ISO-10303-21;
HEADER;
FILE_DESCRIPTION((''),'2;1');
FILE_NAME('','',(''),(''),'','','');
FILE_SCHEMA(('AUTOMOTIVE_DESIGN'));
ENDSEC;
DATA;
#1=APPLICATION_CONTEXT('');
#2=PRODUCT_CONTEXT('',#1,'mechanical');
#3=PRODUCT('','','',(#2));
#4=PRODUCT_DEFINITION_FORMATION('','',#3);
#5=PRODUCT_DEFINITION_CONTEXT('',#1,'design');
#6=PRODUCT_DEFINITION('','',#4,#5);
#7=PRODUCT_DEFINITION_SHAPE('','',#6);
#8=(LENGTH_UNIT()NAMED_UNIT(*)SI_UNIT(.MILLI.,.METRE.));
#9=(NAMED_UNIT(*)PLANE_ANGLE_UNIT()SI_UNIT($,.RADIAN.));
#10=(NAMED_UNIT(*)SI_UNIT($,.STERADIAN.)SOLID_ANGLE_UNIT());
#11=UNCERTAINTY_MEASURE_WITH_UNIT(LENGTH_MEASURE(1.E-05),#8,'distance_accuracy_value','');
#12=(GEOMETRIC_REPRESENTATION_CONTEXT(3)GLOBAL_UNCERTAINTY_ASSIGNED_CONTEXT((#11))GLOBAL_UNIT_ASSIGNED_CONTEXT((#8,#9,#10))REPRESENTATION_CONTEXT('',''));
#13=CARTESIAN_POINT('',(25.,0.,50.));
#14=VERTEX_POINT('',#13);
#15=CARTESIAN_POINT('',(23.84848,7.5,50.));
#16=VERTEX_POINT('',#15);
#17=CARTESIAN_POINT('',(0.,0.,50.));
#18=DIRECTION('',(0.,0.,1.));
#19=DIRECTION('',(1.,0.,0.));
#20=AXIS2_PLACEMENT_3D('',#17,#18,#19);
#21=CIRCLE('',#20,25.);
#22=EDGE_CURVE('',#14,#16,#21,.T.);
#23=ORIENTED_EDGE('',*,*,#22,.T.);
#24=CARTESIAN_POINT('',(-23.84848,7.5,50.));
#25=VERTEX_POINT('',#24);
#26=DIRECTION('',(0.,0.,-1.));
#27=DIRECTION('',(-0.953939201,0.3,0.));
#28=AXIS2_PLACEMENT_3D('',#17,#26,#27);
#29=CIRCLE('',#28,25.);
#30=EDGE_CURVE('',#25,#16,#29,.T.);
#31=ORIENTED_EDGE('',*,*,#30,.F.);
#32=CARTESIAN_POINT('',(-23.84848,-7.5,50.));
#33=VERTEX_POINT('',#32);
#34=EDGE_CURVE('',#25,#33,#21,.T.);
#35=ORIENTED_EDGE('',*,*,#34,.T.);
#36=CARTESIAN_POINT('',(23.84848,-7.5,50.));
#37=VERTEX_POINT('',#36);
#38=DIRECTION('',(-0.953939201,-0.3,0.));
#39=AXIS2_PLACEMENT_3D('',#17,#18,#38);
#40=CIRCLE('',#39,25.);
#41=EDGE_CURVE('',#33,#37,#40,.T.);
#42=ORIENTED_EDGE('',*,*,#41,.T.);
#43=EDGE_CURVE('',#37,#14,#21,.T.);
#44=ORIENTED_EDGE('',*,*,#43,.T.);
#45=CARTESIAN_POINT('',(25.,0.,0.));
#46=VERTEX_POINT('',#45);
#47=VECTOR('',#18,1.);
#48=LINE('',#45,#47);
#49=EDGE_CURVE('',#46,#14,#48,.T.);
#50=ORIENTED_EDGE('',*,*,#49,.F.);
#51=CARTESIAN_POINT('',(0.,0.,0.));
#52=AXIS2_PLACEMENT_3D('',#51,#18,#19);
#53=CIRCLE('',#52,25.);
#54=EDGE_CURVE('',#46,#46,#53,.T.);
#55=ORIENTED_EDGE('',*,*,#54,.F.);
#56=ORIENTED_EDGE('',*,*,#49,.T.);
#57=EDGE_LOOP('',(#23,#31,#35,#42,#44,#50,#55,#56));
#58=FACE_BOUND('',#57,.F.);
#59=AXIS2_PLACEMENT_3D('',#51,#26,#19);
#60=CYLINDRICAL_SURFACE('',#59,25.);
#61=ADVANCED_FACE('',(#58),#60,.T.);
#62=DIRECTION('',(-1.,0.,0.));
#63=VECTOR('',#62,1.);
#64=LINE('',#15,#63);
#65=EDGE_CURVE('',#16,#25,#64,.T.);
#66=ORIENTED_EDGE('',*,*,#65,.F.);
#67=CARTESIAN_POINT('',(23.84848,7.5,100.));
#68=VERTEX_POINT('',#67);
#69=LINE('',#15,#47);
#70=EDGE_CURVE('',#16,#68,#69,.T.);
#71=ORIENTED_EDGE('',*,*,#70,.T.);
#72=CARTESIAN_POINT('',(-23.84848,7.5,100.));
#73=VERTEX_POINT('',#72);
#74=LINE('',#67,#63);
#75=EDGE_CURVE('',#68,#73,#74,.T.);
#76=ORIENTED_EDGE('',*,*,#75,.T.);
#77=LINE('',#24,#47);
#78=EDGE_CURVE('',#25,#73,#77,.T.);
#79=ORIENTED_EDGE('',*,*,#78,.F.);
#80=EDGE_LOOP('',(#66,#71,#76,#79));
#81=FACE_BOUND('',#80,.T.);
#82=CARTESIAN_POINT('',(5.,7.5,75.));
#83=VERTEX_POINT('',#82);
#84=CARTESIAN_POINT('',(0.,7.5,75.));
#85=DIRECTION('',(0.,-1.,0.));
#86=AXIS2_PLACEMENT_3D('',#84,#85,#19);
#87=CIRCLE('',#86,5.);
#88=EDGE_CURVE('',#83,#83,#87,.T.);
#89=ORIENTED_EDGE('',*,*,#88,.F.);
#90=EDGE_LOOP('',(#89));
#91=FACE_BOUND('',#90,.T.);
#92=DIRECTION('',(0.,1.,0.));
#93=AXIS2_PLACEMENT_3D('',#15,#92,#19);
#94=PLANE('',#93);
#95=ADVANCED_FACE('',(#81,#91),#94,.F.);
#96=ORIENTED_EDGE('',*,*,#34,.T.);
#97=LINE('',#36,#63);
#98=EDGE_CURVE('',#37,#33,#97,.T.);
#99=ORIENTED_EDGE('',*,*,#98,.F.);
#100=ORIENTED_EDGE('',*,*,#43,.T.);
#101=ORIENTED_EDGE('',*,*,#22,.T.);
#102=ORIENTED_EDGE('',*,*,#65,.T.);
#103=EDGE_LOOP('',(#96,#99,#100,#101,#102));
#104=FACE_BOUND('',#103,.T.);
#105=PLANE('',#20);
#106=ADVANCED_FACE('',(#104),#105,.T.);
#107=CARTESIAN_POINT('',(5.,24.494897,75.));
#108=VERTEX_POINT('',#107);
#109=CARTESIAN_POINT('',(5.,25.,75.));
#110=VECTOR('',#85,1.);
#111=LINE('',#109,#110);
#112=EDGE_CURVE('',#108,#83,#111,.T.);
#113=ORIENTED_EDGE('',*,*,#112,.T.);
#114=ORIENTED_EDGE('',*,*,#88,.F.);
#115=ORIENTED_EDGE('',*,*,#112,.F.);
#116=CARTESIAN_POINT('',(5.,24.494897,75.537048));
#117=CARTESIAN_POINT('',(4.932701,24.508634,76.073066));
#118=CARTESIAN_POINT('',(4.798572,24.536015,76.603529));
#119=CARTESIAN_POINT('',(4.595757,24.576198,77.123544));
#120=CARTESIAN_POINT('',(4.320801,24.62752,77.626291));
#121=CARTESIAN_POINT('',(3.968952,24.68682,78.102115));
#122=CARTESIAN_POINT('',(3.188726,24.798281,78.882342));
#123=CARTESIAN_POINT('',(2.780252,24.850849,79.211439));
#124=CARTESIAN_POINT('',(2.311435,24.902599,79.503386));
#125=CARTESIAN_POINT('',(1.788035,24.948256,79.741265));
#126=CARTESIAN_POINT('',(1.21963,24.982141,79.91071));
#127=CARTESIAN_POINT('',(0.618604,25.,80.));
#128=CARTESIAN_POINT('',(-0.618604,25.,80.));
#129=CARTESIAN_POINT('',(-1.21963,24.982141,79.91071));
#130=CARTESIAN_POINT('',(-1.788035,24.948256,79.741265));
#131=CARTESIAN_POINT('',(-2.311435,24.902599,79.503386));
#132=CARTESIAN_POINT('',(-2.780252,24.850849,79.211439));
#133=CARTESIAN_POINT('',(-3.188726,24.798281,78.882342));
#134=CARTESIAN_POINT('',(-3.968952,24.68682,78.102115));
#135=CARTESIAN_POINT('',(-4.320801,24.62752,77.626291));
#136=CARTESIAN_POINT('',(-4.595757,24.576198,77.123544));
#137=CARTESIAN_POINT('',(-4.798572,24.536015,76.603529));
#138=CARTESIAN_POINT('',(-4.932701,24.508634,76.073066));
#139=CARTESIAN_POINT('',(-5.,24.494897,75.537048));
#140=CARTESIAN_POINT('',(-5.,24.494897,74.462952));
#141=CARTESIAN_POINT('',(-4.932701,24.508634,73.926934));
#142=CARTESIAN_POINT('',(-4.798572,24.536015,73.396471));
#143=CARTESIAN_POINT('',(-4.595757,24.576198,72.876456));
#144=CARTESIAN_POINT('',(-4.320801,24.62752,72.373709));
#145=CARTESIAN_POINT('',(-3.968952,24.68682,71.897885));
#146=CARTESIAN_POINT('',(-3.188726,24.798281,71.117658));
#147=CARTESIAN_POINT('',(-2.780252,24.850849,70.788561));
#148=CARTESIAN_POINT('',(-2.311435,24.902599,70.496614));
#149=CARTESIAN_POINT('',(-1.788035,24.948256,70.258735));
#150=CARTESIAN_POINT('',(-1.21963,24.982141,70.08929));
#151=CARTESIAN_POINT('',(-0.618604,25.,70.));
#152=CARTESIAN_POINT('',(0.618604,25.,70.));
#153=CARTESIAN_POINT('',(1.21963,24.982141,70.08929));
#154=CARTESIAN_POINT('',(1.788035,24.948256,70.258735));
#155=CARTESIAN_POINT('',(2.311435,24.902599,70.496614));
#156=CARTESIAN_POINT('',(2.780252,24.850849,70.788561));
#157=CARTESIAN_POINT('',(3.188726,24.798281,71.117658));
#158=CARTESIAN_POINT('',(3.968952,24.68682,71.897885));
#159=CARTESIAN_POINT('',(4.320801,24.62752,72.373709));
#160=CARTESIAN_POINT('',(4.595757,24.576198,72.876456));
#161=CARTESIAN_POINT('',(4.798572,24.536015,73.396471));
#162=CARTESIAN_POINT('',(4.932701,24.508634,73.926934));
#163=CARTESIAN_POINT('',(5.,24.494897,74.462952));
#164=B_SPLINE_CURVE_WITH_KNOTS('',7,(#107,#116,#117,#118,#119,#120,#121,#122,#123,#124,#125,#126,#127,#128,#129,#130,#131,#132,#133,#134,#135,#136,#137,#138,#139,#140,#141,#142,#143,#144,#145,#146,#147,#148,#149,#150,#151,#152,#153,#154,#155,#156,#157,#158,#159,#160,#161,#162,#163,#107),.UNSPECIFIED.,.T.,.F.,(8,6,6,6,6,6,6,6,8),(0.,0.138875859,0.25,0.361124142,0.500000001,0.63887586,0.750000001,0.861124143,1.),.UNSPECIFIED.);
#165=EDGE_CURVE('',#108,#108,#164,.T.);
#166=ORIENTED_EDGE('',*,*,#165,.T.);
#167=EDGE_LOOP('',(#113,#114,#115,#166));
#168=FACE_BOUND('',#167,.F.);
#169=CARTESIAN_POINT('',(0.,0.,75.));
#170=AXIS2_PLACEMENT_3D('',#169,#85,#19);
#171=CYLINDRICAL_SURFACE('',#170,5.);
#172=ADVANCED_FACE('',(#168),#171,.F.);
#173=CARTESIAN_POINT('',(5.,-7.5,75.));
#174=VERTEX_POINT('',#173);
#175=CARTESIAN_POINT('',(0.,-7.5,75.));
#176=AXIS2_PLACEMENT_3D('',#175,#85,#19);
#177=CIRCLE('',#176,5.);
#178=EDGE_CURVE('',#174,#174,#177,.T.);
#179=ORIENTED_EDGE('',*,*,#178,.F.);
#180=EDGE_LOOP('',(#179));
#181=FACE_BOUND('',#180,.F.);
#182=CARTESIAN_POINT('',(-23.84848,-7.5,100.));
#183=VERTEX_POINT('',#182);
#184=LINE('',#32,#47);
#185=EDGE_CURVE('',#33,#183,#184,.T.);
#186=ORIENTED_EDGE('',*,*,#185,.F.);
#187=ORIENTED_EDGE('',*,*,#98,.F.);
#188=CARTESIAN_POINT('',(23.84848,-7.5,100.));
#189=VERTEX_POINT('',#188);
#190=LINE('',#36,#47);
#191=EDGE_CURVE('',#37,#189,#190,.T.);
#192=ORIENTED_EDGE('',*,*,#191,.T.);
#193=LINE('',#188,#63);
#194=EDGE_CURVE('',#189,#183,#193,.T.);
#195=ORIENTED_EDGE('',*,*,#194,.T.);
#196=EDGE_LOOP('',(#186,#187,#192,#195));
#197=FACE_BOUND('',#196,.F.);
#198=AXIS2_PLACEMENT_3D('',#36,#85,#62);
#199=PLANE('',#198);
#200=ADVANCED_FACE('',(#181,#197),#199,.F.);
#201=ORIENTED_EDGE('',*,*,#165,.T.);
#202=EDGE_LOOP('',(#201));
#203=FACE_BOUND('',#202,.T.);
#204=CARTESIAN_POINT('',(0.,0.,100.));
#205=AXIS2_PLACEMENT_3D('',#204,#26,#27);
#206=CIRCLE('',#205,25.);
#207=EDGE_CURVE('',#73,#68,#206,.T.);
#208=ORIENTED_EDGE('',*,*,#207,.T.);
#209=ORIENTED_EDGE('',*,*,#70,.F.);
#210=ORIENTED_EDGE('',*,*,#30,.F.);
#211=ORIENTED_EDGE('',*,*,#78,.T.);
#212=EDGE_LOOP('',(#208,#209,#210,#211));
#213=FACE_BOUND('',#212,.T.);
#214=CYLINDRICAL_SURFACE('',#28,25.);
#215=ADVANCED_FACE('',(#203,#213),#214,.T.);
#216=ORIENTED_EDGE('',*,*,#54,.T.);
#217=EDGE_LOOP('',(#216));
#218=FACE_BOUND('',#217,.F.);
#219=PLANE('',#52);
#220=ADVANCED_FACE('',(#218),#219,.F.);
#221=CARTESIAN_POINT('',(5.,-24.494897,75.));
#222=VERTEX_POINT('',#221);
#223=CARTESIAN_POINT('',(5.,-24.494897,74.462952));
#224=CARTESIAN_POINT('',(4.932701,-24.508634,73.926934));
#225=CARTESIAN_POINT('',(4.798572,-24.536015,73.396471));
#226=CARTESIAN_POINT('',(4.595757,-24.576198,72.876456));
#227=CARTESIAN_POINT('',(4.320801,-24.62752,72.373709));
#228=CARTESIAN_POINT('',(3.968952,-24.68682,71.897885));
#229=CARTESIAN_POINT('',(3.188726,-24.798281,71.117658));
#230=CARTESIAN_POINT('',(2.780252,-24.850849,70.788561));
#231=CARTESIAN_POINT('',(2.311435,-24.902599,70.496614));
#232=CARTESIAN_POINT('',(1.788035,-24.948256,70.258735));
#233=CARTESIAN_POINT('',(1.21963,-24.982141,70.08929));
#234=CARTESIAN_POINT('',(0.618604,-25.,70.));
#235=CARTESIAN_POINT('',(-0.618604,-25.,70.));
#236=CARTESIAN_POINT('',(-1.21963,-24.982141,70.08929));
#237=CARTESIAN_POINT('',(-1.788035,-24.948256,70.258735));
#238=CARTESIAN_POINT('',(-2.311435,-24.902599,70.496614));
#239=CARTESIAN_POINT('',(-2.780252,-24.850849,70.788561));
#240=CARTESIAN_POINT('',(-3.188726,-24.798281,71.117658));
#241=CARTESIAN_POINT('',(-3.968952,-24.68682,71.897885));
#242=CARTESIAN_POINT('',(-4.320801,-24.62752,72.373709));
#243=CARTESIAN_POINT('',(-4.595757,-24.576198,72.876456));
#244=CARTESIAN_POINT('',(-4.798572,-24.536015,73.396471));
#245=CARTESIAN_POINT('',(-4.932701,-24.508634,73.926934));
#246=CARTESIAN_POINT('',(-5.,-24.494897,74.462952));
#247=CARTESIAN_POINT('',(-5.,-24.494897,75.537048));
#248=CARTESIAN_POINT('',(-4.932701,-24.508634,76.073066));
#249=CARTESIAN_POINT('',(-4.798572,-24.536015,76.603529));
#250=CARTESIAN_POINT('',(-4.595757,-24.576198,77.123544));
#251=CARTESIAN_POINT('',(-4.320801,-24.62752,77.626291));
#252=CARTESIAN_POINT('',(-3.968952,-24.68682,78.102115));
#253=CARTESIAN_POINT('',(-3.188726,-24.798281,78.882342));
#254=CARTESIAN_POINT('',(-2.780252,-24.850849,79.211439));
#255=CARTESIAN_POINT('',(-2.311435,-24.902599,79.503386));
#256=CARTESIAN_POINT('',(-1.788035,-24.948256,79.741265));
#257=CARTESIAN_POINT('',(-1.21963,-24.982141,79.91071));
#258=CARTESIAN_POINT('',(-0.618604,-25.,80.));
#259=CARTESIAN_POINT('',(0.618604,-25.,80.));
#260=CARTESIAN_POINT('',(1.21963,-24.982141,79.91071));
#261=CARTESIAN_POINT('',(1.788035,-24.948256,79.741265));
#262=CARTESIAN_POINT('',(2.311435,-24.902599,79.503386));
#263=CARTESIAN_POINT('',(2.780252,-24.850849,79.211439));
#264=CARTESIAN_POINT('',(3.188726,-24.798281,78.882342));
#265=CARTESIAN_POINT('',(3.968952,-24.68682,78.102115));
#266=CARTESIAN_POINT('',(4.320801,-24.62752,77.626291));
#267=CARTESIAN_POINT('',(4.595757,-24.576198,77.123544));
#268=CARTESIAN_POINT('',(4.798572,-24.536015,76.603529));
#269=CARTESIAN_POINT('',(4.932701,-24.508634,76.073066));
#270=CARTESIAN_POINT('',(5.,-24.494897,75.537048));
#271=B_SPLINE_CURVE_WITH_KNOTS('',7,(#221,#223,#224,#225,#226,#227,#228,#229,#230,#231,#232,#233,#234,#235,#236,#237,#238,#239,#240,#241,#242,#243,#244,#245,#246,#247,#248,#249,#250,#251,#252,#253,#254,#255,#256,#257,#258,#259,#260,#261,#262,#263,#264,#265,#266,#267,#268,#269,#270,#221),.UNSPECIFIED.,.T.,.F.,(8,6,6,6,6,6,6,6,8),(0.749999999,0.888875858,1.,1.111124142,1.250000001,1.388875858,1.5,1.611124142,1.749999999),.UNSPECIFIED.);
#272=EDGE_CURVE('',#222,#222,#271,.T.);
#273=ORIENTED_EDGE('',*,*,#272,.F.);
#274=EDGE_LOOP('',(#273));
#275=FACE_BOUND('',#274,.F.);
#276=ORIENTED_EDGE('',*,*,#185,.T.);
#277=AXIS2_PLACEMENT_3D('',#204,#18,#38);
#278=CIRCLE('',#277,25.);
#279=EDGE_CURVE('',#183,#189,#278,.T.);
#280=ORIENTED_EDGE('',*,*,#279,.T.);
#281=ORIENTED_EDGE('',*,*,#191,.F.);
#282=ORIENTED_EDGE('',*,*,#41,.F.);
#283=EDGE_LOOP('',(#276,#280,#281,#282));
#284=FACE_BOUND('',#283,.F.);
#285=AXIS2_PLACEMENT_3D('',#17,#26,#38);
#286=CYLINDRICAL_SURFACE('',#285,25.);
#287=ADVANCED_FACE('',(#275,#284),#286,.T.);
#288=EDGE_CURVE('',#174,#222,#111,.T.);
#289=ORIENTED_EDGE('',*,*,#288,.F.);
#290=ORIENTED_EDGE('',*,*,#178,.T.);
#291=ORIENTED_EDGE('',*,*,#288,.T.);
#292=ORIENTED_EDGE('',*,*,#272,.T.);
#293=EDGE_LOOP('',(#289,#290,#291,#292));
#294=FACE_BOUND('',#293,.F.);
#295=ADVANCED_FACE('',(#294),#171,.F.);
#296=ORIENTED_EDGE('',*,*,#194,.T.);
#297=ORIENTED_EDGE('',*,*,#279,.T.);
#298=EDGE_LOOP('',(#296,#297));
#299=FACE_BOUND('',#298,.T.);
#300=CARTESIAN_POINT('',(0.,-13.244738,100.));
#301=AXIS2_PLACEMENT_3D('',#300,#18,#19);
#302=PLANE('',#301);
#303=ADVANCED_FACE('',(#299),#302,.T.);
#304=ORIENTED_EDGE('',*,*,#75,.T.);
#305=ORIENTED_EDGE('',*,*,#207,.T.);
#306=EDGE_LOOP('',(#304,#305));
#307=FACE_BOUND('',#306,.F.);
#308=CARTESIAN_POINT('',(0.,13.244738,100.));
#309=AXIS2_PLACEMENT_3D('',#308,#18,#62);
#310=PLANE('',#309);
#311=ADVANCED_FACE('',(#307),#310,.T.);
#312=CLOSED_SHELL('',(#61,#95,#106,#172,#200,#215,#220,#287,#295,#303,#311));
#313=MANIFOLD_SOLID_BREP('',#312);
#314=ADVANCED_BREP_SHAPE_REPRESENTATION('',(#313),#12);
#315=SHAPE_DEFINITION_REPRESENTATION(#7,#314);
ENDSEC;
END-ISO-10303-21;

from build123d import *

# Parameters (mm, degrees)
F0_R     = 25
F1_DEPTH = 50
F3_DEPTH = 50
F5_R     = 5
F6_DEPTH = 25


# Not quite as in the source:
# - after a boolean that leaves OpenCascade's solid faulty, fix() repairs it


with BuildPart() as f1:
    # F0 (on Top) → F1 (new body)
    with BuildSketch(Plane.XY):
        Circle(F0_R)
    extrude(amount=F1_DEPTH)

    # F2 (on face) → F3 (join)
    with BuildSketch(Plane.XY.offset(50)):
        with BuildLine():
            Line((23.8484800354, -7.5), (-23.8484800354, -7.5))
            ThreePointArc((-23.8484800354, -7.5), (0, -25), (23.8484800354, -7.5))
        make_face()
    extrude(amount=F3_DEPTH)

    # F4: F1 across plane


with BuildPart() as f1_1:
    add(f1.part)
    add(f1.part.mirror(Plane.XZ))

    add(f1_1.part.fix(), mode=Mode.REPLACE)

    # F5 (on Front) → F6 (cut, symmetric)
    with BuildSketch(Plane.XZ):
        with Locations((0, 75)):
            Circle(F5_R)
    extrude(amount=F6_DEPTH, both=True, mode=Mode.SUBTRACT)


solid = f1_1.part
